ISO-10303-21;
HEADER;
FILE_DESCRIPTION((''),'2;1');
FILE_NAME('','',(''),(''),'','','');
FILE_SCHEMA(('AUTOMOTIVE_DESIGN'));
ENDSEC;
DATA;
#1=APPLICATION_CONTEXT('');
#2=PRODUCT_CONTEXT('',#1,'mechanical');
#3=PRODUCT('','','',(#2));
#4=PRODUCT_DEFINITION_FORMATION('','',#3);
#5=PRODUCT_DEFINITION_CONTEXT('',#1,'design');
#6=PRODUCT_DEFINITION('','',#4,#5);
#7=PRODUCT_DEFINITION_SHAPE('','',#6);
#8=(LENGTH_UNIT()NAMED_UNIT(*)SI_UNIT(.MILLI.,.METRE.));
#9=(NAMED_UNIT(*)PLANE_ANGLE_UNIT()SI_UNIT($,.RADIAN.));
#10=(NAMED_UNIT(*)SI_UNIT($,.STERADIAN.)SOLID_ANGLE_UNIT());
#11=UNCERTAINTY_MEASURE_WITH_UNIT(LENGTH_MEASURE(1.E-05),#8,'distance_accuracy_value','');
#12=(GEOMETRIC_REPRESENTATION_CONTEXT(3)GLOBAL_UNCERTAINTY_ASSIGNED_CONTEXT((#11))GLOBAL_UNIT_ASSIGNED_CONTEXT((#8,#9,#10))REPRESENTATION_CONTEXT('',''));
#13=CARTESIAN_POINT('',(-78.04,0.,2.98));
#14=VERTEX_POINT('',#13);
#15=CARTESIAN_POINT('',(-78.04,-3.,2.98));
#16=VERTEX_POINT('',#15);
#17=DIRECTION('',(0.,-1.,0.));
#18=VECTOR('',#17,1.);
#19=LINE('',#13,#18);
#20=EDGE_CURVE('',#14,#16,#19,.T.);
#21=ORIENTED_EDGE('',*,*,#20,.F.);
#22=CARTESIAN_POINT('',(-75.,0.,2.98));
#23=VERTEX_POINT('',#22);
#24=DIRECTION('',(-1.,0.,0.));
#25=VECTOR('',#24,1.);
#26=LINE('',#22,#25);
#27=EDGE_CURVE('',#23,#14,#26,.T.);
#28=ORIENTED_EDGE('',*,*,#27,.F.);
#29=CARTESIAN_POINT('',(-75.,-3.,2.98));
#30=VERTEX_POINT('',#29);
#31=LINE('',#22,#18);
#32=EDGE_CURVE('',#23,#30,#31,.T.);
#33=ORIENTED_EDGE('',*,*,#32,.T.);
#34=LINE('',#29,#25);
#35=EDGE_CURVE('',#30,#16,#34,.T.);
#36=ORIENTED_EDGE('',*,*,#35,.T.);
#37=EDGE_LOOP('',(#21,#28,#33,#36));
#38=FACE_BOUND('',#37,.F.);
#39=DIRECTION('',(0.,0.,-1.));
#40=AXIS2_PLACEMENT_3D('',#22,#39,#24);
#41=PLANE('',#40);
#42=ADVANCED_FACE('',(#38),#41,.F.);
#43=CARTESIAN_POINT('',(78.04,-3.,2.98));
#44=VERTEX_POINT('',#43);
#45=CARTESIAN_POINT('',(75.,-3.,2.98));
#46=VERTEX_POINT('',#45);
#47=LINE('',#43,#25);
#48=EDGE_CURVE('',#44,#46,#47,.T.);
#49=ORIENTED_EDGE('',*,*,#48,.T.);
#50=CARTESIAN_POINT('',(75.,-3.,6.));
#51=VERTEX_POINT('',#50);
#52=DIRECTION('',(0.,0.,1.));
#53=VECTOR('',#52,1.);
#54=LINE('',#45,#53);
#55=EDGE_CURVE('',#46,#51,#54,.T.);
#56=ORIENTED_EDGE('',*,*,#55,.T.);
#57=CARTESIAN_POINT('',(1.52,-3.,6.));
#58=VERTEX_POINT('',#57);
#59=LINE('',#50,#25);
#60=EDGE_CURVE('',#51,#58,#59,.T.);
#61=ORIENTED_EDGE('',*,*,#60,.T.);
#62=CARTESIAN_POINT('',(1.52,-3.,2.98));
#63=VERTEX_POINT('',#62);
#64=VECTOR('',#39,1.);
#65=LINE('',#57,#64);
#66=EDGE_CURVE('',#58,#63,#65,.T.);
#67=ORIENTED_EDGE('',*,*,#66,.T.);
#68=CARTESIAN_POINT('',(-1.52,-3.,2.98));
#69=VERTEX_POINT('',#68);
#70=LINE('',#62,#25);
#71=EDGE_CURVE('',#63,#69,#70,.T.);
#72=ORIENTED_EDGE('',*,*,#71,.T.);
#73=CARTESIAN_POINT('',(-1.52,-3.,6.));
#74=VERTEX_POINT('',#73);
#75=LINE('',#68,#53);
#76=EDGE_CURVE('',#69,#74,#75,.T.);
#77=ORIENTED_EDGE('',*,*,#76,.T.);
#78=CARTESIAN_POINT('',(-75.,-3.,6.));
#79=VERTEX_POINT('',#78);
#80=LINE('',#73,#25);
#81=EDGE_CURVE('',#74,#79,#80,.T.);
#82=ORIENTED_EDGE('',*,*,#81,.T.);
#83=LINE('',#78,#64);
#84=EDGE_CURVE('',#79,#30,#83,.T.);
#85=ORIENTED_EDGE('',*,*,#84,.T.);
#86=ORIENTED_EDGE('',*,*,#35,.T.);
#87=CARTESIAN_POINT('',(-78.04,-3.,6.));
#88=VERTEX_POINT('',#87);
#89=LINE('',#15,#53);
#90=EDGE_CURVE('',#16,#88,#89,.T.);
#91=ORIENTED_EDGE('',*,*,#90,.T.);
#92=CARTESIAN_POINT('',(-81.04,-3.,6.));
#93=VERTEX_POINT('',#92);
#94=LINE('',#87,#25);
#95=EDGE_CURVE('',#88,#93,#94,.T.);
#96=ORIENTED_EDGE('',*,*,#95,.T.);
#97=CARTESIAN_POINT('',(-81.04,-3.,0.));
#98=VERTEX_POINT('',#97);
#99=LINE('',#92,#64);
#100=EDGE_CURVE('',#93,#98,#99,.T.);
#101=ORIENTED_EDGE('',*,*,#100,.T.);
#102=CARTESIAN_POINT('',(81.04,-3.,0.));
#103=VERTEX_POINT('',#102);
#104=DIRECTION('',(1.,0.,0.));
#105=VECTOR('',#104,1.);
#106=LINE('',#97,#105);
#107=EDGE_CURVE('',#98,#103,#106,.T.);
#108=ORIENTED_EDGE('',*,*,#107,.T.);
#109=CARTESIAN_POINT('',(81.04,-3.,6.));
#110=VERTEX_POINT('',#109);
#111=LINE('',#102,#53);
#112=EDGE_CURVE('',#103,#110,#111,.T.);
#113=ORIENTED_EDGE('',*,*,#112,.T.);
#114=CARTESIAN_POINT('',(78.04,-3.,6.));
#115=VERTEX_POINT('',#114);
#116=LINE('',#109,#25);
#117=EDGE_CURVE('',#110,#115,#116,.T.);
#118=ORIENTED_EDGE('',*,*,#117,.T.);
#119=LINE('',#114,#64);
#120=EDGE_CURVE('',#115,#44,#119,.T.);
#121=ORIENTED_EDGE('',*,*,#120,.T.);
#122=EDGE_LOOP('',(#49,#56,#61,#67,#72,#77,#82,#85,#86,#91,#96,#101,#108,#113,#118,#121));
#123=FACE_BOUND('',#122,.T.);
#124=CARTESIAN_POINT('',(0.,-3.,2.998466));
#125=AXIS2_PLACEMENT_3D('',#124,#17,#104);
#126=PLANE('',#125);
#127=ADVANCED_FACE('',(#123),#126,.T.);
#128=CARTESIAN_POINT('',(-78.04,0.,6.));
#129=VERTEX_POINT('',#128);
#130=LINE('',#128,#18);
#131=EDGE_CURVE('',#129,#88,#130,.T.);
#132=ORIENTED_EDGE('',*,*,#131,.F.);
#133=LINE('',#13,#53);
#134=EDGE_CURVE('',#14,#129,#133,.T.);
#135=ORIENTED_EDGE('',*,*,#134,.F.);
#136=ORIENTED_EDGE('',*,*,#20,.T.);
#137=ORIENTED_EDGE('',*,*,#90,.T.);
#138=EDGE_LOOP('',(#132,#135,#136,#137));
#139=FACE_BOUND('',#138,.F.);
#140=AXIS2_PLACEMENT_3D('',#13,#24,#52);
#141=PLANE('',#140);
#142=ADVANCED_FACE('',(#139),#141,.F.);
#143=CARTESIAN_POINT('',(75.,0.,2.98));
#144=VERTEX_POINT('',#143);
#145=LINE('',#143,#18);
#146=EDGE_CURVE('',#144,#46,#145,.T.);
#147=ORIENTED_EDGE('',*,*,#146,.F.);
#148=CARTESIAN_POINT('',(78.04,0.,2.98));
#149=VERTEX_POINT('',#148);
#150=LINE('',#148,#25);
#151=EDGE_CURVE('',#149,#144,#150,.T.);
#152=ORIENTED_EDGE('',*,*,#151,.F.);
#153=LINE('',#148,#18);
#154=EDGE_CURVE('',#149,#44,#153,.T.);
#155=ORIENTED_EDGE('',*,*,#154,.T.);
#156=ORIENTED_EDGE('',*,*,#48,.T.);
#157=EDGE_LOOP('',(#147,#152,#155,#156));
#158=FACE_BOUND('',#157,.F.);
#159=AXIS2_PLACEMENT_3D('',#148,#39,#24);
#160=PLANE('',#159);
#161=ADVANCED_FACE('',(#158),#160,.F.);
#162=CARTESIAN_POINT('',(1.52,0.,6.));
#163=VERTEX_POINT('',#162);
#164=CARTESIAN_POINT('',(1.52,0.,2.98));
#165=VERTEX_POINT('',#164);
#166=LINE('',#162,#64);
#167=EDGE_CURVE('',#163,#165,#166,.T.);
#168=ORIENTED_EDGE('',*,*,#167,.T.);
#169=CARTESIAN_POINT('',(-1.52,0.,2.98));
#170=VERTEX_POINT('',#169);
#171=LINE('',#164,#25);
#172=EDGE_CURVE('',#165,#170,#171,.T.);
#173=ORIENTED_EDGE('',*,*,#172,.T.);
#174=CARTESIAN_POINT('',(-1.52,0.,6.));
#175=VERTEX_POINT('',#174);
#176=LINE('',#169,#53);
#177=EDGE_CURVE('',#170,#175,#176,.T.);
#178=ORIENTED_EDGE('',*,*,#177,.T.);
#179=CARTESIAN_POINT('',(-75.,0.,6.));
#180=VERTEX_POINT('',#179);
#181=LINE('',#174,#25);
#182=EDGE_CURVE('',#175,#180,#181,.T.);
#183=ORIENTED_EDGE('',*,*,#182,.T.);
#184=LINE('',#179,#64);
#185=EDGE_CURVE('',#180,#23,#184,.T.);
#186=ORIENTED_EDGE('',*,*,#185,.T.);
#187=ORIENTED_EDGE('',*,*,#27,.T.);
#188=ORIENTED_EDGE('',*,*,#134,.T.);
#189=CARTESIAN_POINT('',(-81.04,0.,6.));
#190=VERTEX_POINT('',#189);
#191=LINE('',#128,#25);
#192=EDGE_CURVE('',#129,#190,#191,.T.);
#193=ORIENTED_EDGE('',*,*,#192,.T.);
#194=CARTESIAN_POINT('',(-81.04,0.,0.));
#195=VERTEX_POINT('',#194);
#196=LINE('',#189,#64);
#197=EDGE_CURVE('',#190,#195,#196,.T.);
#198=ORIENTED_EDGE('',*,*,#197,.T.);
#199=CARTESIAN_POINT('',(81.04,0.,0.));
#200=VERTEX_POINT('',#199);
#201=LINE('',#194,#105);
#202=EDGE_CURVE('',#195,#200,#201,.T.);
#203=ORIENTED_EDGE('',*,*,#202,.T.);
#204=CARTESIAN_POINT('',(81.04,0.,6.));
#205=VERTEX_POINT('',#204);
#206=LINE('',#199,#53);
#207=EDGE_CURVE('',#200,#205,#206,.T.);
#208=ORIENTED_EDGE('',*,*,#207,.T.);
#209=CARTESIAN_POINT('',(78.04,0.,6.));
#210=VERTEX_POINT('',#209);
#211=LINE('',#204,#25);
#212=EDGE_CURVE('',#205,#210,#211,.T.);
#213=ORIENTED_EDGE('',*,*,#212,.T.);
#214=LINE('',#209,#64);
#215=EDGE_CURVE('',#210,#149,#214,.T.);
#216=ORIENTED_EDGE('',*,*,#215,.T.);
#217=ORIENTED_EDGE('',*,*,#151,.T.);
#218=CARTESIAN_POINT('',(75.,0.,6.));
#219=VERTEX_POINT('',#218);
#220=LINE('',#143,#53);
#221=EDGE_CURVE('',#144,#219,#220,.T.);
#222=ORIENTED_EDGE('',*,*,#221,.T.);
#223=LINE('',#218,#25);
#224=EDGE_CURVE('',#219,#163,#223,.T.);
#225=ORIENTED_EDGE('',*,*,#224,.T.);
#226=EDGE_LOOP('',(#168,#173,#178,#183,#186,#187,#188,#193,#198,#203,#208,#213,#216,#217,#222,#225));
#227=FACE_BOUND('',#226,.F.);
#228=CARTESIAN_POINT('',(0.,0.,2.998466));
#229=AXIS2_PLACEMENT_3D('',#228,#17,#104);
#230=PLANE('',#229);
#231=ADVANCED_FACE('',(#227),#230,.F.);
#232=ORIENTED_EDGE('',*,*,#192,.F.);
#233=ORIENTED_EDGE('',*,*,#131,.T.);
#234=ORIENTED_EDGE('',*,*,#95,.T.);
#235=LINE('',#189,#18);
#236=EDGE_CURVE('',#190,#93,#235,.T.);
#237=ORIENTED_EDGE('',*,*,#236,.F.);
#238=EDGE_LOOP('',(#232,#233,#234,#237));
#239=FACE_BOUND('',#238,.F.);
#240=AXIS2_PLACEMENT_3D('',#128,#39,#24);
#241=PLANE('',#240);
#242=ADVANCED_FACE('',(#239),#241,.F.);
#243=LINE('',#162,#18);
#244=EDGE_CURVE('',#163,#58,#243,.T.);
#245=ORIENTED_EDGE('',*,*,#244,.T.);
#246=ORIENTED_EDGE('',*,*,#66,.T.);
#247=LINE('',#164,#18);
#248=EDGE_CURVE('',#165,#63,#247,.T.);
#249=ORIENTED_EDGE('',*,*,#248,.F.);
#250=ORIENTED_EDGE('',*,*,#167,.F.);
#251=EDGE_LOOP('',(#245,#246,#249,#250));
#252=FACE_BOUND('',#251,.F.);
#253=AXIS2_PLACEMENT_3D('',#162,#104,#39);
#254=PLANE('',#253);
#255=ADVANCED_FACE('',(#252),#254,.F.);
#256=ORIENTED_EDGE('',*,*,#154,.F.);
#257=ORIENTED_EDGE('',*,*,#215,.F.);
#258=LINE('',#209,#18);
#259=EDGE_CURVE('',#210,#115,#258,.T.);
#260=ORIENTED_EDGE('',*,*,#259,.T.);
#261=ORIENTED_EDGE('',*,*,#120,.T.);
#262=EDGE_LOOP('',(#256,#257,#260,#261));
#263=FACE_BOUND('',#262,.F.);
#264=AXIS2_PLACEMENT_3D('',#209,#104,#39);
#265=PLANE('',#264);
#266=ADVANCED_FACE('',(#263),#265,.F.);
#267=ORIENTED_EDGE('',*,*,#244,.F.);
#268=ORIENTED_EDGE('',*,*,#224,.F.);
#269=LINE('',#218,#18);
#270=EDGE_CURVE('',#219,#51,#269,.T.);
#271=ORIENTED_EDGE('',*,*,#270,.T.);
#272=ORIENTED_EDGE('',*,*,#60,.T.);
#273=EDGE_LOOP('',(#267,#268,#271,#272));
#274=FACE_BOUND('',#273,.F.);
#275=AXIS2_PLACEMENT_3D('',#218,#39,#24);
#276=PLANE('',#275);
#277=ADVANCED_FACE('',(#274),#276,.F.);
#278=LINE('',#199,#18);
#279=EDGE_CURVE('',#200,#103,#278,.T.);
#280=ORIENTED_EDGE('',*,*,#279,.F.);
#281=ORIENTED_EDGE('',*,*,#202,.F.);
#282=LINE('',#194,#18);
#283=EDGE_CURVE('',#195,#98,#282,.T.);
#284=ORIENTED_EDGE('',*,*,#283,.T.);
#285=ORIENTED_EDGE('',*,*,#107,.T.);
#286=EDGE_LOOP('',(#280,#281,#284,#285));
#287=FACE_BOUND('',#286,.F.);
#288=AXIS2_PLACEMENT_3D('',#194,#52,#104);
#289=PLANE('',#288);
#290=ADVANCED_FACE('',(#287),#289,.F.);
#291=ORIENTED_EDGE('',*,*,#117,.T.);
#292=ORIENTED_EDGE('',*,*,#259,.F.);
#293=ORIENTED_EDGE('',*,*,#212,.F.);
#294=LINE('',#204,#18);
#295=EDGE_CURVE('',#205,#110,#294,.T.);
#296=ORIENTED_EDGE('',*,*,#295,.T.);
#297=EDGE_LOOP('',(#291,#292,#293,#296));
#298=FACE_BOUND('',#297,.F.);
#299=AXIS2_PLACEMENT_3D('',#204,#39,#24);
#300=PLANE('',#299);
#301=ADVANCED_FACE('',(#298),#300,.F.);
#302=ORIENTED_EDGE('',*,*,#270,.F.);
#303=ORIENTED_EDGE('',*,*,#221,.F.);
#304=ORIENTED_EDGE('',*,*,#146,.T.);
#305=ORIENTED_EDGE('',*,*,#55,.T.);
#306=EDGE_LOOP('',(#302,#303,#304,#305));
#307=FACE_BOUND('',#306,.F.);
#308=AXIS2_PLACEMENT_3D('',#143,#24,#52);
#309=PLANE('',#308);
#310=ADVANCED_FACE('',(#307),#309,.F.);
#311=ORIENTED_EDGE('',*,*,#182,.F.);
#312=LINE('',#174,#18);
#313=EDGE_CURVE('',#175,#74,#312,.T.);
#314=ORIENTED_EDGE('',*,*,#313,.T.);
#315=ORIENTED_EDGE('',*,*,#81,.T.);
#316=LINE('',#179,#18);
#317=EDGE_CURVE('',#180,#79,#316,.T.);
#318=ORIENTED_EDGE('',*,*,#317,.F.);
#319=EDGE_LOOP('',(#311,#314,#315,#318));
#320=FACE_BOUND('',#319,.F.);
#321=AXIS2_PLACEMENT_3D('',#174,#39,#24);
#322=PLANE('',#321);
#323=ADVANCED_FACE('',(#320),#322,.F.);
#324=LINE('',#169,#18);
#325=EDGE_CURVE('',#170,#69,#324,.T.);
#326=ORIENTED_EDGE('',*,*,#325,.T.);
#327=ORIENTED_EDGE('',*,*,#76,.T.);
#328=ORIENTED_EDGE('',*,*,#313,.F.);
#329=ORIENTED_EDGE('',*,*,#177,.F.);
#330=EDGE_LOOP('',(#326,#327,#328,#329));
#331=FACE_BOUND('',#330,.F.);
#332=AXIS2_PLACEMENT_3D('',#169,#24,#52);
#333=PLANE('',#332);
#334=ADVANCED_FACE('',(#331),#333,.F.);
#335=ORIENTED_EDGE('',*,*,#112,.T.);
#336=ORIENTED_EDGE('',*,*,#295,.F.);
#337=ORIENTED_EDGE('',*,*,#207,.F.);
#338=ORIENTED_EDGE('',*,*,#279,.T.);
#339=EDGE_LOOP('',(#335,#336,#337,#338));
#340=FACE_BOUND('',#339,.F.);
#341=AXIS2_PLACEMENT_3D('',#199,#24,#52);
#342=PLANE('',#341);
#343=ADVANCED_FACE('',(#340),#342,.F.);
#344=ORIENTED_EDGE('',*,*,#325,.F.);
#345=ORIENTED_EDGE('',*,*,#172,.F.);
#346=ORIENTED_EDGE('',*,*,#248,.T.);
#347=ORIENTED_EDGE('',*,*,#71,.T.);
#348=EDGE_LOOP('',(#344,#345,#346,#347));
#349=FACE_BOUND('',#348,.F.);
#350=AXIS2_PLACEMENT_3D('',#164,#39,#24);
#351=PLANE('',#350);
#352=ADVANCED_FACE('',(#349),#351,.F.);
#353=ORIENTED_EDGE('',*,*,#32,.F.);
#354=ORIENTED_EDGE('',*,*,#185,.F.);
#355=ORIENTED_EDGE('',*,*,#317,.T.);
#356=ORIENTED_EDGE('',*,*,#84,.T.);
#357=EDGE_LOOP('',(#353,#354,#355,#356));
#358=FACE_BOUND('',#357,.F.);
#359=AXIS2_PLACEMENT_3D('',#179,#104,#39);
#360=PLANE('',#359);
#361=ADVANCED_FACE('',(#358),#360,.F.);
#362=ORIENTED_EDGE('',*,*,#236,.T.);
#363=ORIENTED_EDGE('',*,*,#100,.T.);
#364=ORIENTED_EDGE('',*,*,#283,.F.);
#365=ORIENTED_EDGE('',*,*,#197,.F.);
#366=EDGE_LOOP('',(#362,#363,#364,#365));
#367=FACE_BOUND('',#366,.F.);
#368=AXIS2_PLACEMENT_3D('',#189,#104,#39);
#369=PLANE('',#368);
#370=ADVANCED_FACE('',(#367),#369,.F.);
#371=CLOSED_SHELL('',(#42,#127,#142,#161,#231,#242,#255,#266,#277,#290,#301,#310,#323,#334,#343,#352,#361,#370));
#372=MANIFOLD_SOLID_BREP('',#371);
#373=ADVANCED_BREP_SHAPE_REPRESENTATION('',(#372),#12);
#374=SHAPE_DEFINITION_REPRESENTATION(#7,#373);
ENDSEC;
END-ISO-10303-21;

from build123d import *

# Parameters (mm, degrees)
F1_DEPTH = 3


# Not quite as in the source:
# - a feature names something its author has since deleted; it is built from what else it names


with BuildPart() as f1:
    # F0 (on Front) → F1 (new body)
    with BuildSketch(Plane.XZ):
        Polygon((-81.04, 6), (-81.04, 0), (81.04, 0), (81.04, 6), (78.04, 6), (78.04, 2.98), (75, 2.98), (75, 6), (1.52, 6), (1.52, 2.98), (-1.52, 2.98), (-1.52, 6), (-75, 6), (-75, 2.98), (-78.04, 2.98), (-78.04, 6), align=None)
    extrude(amount=F1_DEPTH)


solid = f1.part
